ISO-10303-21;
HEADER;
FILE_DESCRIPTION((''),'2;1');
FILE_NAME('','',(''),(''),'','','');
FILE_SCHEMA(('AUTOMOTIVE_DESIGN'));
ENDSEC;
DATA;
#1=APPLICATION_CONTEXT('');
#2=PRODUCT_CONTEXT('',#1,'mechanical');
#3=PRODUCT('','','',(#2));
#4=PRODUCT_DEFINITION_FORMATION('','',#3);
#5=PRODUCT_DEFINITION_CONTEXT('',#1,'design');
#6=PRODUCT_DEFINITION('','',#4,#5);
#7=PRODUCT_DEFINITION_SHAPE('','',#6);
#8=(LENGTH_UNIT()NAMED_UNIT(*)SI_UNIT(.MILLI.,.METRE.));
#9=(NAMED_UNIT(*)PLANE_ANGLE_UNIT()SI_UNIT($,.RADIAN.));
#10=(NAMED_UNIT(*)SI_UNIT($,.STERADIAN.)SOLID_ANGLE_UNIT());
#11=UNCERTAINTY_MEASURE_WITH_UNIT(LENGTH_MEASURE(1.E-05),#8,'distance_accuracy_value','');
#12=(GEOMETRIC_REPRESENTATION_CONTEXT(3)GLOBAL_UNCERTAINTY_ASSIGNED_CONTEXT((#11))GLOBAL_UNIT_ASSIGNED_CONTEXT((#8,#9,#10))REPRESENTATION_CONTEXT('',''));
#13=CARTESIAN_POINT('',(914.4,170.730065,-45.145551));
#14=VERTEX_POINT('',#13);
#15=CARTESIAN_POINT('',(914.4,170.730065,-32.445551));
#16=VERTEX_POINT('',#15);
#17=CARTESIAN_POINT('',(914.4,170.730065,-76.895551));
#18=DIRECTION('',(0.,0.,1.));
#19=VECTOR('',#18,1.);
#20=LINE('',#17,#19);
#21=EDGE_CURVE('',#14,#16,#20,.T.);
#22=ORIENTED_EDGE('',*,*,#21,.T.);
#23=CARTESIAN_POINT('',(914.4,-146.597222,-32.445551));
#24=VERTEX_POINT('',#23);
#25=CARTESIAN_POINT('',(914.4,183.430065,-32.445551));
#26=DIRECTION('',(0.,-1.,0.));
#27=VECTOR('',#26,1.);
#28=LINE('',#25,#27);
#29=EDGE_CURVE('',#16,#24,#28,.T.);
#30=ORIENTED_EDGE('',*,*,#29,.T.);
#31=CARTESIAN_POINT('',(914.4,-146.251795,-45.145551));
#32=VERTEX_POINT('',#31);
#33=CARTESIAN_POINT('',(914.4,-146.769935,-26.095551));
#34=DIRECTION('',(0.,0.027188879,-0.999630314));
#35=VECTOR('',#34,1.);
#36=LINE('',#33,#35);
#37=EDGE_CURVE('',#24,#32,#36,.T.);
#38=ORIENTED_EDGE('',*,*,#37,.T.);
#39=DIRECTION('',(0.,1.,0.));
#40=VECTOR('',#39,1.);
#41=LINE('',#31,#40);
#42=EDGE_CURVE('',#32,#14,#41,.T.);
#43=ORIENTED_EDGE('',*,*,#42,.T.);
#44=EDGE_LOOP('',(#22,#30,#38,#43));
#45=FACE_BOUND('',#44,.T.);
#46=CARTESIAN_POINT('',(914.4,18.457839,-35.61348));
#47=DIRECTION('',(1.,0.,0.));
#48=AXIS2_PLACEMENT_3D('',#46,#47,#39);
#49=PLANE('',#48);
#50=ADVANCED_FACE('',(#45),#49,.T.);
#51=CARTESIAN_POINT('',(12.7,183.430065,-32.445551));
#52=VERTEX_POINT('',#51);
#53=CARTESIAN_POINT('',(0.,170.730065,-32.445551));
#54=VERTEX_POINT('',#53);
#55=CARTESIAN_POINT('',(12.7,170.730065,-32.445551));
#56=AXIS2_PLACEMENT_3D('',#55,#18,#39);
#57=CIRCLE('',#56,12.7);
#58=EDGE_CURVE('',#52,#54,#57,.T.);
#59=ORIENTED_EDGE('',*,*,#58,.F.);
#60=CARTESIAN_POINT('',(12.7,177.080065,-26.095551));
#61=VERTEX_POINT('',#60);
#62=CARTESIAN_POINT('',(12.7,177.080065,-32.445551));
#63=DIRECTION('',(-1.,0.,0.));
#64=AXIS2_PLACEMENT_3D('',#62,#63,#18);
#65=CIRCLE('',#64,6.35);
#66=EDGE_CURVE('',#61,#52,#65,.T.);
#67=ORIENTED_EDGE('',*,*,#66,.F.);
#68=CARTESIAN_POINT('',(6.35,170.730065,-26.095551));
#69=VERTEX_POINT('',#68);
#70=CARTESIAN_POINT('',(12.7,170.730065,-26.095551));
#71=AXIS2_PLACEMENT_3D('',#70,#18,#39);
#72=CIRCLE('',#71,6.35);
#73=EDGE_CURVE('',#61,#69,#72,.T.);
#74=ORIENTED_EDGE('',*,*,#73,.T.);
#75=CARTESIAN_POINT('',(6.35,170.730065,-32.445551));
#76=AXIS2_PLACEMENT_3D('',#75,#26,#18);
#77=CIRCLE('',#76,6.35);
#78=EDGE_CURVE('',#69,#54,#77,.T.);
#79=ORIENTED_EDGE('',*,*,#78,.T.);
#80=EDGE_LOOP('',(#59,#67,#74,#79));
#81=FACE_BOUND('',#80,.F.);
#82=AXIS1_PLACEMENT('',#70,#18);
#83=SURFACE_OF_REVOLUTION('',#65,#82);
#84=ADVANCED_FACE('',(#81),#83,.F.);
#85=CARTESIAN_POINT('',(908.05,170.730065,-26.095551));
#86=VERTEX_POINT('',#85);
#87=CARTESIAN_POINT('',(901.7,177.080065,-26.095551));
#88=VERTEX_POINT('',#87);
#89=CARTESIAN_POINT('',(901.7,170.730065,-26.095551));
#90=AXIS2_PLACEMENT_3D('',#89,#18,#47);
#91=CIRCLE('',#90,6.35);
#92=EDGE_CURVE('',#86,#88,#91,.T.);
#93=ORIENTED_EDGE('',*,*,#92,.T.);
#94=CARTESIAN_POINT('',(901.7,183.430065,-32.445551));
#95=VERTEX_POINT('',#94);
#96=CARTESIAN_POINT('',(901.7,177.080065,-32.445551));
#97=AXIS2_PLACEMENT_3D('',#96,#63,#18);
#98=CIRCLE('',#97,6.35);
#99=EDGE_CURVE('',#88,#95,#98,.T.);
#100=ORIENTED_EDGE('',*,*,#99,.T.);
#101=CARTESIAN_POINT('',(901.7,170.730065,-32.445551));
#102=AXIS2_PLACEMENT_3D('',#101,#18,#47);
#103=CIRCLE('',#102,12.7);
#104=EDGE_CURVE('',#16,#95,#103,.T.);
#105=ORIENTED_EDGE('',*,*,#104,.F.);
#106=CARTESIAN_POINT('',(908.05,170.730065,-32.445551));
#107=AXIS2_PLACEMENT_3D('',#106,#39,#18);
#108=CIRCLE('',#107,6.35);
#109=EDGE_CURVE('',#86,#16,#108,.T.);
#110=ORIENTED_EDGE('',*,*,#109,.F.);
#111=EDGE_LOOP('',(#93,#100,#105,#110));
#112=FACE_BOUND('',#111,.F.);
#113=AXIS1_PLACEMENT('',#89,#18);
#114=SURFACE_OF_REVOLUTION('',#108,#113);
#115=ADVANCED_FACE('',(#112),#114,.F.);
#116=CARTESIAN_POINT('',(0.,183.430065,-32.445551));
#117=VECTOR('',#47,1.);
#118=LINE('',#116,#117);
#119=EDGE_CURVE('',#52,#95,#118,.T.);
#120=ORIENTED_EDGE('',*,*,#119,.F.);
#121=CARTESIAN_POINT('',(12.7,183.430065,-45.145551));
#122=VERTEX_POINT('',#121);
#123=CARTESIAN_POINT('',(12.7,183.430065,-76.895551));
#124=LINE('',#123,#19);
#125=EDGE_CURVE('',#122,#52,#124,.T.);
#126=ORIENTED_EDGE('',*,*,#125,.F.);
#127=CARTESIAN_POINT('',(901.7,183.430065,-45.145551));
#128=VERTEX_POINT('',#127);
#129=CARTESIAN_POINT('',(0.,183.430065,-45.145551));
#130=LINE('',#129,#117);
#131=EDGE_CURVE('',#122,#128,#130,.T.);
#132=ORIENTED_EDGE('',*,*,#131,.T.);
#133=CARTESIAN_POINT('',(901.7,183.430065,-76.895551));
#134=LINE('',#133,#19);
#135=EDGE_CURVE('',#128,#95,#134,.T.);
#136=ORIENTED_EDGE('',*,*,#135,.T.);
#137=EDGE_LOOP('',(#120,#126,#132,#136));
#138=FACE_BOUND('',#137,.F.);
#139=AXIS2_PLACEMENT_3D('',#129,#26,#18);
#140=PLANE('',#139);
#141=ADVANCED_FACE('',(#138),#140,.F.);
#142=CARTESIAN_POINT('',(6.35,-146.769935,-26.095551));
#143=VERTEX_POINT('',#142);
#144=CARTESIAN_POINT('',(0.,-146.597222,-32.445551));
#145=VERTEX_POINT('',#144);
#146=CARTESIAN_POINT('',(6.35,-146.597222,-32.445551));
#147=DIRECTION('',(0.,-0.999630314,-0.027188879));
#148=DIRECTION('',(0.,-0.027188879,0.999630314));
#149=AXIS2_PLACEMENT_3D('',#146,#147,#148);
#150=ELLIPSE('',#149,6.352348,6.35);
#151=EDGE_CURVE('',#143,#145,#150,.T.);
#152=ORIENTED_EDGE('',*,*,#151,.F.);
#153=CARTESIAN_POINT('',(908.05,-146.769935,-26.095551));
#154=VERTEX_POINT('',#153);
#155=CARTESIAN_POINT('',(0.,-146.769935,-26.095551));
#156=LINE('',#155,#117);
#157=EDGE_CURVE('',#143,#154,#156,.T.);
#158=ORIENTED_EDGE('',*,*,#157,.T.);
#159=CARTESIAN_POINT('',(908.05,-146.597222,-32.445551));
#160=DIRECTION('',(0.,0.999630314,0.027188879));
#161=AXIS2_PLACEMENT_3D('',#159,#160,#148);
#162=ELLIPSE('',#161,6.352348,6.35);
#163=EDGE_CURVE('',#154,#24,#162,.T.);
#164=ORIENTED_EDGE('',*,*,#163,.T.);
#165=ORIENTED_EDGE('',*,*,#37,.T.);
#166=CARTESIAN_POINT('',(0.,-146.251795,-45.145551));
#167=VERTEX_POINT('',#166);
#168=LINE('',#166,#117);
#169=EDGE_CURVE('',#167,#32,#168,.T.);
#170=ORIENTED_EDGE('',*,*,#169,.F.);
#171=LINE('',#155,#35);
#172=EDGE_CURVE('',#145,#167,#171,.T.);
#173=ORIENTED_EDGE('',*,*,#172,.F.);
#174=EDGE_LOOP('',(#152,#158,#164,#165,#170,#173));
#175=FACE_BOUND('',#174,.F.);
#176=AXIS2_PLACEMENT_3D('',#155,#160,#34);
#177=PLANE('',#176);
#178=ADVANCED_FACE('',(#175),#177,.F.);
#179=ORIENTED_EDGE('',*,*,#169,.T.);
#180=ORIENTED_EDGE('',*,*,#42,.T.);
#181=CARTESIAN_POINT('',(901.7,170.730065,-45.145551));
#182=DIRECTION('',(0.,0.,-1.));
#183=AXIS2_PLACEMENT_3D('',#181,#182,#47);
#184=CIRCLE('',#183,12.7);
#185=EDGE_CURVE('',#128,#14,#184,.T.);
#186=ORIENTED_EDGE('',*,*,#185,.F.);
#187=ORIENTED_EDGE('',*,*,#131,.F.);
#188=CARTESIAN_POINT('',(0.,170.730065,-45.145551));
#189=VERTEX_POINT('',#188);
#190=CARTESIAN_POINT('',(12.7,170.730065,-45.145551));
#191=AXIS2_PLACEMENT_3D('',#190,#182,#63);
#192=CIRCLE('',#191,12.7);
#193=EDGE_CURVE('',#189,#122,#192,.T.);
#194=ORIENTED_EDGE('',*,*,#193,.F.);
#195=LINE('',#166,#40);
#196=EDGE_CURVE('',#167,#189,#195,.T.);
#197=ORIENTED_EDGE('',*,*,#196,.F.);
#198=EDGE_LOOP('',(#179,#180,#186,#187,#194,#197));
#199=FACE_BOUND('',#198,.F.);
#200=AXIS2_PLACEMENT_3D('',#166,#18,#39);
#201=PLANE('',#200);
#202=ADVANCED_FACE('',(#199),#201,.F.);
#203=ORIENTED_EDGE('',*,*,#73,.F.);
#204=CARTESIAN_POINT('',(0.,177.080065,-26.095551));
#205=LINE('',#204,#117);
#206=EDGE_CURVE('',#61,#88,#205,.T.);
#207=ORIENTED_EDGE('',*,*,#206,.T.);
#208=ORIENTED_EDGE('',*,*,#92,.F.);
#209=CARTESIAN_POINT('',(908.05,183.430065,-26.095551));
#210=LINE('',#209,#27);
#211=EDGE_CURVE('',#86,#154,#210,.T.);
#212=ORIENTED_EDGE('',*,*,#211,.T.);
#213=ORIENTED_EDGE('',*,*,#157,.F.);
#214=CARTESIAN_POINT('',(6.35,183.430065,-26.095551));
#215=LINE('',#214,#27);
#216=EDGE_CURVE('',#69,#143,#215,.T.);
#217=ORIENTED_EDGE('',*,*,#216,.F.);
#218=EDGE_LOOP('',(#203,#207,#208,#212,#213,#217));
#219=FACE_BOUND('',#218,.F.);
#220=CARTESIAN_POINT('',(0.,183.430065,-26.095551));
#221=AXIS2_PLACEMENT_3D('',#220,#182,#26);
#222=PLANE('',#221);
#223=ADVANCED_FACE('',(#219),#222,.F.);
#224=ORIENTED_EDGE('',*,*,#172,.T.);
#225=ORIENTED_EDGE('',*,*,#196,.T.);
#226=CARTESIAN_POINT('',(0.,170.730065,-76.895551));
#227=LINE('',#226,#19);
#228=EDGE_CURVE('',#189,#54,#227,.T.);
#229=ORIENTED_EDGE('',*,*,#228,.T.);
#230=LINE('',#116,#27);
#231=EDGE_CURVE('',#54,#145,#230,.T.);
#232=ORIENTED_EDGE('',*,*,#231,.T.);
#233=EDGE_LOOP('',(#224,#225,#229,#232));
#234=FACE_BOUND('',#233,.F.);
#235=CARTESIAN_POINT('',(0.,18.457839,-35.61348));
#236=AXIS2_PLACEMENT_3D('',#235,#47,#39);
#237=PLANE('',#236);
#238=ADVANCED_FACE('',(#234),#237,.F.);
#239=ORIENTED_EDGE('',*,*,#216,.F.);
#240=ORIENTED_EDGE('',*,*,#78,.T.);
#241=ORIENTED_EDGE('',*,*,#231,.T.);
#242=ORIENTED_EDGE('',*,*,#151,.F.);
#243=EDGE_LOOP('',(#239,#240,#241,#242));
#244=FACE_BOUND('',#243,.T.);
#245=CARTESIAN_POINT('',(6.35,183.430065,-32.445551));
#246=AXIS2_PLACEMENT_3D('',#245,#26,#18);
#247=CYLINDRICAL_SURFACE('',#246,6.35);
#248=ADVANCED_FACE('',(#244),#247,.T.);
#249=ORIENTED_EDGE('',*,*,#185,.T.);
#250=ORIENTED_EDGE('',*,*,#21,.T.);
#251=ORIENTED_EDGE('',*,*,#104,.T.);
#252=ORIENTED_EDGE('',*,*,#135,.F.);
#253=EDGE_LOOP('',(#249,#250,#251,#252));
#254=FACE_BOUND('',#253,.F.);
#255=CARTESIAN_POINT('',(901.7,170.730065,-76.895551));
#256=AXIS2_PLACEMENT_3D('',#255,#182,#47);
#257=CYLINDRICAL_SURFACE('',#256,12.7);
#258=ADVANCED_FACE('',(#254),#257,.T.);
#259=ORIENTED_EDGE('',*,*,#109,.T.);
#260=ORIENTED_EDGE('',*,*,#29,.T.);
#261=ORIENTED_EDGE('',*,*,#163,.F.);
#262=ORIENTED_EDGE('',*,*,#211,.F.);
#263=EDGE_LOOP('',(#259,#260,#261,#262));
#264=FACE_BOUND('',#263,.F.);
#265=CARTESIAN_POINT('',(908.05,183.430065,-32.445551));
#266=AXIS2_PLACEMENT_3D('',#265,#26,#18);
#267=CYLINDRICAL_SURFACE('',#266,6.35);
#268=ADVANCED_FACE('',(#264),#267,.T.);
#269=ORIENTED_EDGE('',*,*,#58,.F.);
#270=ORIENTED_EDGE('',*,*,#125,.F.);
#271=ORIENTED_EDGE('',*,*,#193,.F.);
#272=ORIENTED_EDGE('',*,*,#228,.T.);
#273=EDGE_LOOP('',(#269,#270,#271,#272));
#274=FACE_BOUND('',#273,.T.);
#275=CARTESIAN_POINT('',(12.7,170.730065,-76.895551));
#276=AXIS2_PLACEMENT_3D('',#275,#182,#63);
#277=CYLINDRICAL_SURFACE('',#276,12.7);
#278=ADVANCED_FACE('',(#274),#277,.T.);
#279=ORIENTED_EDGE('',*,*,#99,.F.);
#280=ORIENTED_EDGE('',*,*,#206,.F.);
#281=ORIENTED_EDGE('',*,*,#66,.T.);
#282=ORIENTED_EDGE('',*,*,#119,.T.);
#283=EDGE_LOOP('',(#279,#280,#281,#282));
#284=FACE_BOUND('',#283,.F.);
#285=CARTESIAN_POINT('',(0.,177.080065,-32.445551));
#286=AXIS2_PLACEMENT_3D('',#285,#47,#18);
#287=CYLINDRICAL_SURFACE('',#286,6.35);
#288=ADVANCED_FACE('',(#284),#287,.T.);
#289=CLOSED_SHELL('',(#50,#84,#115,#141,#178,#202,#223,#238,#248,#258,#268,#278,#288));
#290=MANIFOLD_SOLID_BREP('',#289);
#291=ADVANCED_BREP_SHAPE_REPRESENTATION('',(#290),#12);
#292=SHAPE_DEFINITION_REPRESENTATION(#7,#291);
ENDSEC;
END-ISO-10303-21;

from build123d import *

# Parameters (mm, degrees)
F1_DEPTH    = 914.4
F2_R        = 6.35
F3_T1_DEPTH = 50.8
F3_T4_ANGLE = 90
F3_T6_ANGLE = 90


# Not quite as in the source:
# - a fillet or chamfer that OpenCascade refuses, or shapes differently, is made with other operations: its cross-section is extruded or revolved along the edge and cut away or added


with BuildPart() as f1:
    # F0 (on Right) → F1 (new body)
    with BuildSketch(Plane.YZ):
        Polygon((183.430065248, -26.0955506578), (-146.769934752, -26.0955506578), (-146.2517950619, -45.1455506578), (183.430065248, -45.1455506578), align=None)
    extrude(amount=F1_DEPTH)

    # F2
    f2_edges = [f1.edges().sort_by_distance(p)[0] for p in [
        (0, 18.330065, -26.095551),
        (457.2, 183.430065, -26.095551),
        (914.4, 18.330065, -26.095551),
    ]]
    fillet(f2_edges, radius=F2_R)

    # F3: fillet of radius 12.7 on 2 edges, made by hand

    # F3_s2 → F3_t1 (cut)
    with BuildSketch(Plane.XY.offset(-76.8955506578)):
        with BuildLine():
            ThreePointArc((914.4, 170.730065248), (910.6802561211, 179.710321369), (901.7, 183.430065248))
            Line((901.7, 183.430065248), (914.4, 183.430065248))
            Line((914.4, 183.430065248), (914.4, 170.730065248))
        make_face()
        with BuildLine():
            ThreePointArc((0, 170.730065248), (3.7197438789, 179.710321369), (12.7, 183.430065248))
            Line((12.7, 183.430065248), (0, 183.430065248))
            Line((0, 183.430065248), (0, 170.730065248))
        make_face()
    extrude(amount=F3_T1_DEPTH, mode=Mode.SUBTRACT)

    # F3_s3 → F3_t4 (revolve, cut)
    with BuildSketch(Plane.YZ.offset(12.7)):
        with BuildLine():
            ThreePointArc((177.080065248, -26.0955506578), (181.5701933085, -27.9554225973), (183.430065248, -32.4455506578))
            Line((183.430065248, -32.4455506578), (183.430065248, -26.0955506578))
            Line((183.430065248, -26.0955506578), (177.080065248, -26.0955506578))
        make_face()
    revolve(axis=Axis((12.7, 170.730065248, -26.0955506578), (0, 0, 1)), revolution_arc=F3_T4_ANGLE, mode=Mode.SUBTRACT)

    # F3_s5 → F3_t6 (revolve, cut)
    with BuildSketch(Plane.XZ.offset(-170.730065248)):
        with BuildLine():
            ThreePointArc((908.05, -26.0955506578), (912.5401280605, -27.9554225973), (914.4, -32.4455506578))
            Line((914.4, -32.4455506578), (914.4, -26.0955506578))
            Line((914.4, -26.0955506578), (908.05, -26.0955506578))
        make_face()
    revolve(axis=Axis((901.7, 170.730065248, -26.0955506578), (0, 0, 1)), revolution_arc=F3_T6_ANGLE, mode=Mode.SUBTRACT)


solid = f1.part
